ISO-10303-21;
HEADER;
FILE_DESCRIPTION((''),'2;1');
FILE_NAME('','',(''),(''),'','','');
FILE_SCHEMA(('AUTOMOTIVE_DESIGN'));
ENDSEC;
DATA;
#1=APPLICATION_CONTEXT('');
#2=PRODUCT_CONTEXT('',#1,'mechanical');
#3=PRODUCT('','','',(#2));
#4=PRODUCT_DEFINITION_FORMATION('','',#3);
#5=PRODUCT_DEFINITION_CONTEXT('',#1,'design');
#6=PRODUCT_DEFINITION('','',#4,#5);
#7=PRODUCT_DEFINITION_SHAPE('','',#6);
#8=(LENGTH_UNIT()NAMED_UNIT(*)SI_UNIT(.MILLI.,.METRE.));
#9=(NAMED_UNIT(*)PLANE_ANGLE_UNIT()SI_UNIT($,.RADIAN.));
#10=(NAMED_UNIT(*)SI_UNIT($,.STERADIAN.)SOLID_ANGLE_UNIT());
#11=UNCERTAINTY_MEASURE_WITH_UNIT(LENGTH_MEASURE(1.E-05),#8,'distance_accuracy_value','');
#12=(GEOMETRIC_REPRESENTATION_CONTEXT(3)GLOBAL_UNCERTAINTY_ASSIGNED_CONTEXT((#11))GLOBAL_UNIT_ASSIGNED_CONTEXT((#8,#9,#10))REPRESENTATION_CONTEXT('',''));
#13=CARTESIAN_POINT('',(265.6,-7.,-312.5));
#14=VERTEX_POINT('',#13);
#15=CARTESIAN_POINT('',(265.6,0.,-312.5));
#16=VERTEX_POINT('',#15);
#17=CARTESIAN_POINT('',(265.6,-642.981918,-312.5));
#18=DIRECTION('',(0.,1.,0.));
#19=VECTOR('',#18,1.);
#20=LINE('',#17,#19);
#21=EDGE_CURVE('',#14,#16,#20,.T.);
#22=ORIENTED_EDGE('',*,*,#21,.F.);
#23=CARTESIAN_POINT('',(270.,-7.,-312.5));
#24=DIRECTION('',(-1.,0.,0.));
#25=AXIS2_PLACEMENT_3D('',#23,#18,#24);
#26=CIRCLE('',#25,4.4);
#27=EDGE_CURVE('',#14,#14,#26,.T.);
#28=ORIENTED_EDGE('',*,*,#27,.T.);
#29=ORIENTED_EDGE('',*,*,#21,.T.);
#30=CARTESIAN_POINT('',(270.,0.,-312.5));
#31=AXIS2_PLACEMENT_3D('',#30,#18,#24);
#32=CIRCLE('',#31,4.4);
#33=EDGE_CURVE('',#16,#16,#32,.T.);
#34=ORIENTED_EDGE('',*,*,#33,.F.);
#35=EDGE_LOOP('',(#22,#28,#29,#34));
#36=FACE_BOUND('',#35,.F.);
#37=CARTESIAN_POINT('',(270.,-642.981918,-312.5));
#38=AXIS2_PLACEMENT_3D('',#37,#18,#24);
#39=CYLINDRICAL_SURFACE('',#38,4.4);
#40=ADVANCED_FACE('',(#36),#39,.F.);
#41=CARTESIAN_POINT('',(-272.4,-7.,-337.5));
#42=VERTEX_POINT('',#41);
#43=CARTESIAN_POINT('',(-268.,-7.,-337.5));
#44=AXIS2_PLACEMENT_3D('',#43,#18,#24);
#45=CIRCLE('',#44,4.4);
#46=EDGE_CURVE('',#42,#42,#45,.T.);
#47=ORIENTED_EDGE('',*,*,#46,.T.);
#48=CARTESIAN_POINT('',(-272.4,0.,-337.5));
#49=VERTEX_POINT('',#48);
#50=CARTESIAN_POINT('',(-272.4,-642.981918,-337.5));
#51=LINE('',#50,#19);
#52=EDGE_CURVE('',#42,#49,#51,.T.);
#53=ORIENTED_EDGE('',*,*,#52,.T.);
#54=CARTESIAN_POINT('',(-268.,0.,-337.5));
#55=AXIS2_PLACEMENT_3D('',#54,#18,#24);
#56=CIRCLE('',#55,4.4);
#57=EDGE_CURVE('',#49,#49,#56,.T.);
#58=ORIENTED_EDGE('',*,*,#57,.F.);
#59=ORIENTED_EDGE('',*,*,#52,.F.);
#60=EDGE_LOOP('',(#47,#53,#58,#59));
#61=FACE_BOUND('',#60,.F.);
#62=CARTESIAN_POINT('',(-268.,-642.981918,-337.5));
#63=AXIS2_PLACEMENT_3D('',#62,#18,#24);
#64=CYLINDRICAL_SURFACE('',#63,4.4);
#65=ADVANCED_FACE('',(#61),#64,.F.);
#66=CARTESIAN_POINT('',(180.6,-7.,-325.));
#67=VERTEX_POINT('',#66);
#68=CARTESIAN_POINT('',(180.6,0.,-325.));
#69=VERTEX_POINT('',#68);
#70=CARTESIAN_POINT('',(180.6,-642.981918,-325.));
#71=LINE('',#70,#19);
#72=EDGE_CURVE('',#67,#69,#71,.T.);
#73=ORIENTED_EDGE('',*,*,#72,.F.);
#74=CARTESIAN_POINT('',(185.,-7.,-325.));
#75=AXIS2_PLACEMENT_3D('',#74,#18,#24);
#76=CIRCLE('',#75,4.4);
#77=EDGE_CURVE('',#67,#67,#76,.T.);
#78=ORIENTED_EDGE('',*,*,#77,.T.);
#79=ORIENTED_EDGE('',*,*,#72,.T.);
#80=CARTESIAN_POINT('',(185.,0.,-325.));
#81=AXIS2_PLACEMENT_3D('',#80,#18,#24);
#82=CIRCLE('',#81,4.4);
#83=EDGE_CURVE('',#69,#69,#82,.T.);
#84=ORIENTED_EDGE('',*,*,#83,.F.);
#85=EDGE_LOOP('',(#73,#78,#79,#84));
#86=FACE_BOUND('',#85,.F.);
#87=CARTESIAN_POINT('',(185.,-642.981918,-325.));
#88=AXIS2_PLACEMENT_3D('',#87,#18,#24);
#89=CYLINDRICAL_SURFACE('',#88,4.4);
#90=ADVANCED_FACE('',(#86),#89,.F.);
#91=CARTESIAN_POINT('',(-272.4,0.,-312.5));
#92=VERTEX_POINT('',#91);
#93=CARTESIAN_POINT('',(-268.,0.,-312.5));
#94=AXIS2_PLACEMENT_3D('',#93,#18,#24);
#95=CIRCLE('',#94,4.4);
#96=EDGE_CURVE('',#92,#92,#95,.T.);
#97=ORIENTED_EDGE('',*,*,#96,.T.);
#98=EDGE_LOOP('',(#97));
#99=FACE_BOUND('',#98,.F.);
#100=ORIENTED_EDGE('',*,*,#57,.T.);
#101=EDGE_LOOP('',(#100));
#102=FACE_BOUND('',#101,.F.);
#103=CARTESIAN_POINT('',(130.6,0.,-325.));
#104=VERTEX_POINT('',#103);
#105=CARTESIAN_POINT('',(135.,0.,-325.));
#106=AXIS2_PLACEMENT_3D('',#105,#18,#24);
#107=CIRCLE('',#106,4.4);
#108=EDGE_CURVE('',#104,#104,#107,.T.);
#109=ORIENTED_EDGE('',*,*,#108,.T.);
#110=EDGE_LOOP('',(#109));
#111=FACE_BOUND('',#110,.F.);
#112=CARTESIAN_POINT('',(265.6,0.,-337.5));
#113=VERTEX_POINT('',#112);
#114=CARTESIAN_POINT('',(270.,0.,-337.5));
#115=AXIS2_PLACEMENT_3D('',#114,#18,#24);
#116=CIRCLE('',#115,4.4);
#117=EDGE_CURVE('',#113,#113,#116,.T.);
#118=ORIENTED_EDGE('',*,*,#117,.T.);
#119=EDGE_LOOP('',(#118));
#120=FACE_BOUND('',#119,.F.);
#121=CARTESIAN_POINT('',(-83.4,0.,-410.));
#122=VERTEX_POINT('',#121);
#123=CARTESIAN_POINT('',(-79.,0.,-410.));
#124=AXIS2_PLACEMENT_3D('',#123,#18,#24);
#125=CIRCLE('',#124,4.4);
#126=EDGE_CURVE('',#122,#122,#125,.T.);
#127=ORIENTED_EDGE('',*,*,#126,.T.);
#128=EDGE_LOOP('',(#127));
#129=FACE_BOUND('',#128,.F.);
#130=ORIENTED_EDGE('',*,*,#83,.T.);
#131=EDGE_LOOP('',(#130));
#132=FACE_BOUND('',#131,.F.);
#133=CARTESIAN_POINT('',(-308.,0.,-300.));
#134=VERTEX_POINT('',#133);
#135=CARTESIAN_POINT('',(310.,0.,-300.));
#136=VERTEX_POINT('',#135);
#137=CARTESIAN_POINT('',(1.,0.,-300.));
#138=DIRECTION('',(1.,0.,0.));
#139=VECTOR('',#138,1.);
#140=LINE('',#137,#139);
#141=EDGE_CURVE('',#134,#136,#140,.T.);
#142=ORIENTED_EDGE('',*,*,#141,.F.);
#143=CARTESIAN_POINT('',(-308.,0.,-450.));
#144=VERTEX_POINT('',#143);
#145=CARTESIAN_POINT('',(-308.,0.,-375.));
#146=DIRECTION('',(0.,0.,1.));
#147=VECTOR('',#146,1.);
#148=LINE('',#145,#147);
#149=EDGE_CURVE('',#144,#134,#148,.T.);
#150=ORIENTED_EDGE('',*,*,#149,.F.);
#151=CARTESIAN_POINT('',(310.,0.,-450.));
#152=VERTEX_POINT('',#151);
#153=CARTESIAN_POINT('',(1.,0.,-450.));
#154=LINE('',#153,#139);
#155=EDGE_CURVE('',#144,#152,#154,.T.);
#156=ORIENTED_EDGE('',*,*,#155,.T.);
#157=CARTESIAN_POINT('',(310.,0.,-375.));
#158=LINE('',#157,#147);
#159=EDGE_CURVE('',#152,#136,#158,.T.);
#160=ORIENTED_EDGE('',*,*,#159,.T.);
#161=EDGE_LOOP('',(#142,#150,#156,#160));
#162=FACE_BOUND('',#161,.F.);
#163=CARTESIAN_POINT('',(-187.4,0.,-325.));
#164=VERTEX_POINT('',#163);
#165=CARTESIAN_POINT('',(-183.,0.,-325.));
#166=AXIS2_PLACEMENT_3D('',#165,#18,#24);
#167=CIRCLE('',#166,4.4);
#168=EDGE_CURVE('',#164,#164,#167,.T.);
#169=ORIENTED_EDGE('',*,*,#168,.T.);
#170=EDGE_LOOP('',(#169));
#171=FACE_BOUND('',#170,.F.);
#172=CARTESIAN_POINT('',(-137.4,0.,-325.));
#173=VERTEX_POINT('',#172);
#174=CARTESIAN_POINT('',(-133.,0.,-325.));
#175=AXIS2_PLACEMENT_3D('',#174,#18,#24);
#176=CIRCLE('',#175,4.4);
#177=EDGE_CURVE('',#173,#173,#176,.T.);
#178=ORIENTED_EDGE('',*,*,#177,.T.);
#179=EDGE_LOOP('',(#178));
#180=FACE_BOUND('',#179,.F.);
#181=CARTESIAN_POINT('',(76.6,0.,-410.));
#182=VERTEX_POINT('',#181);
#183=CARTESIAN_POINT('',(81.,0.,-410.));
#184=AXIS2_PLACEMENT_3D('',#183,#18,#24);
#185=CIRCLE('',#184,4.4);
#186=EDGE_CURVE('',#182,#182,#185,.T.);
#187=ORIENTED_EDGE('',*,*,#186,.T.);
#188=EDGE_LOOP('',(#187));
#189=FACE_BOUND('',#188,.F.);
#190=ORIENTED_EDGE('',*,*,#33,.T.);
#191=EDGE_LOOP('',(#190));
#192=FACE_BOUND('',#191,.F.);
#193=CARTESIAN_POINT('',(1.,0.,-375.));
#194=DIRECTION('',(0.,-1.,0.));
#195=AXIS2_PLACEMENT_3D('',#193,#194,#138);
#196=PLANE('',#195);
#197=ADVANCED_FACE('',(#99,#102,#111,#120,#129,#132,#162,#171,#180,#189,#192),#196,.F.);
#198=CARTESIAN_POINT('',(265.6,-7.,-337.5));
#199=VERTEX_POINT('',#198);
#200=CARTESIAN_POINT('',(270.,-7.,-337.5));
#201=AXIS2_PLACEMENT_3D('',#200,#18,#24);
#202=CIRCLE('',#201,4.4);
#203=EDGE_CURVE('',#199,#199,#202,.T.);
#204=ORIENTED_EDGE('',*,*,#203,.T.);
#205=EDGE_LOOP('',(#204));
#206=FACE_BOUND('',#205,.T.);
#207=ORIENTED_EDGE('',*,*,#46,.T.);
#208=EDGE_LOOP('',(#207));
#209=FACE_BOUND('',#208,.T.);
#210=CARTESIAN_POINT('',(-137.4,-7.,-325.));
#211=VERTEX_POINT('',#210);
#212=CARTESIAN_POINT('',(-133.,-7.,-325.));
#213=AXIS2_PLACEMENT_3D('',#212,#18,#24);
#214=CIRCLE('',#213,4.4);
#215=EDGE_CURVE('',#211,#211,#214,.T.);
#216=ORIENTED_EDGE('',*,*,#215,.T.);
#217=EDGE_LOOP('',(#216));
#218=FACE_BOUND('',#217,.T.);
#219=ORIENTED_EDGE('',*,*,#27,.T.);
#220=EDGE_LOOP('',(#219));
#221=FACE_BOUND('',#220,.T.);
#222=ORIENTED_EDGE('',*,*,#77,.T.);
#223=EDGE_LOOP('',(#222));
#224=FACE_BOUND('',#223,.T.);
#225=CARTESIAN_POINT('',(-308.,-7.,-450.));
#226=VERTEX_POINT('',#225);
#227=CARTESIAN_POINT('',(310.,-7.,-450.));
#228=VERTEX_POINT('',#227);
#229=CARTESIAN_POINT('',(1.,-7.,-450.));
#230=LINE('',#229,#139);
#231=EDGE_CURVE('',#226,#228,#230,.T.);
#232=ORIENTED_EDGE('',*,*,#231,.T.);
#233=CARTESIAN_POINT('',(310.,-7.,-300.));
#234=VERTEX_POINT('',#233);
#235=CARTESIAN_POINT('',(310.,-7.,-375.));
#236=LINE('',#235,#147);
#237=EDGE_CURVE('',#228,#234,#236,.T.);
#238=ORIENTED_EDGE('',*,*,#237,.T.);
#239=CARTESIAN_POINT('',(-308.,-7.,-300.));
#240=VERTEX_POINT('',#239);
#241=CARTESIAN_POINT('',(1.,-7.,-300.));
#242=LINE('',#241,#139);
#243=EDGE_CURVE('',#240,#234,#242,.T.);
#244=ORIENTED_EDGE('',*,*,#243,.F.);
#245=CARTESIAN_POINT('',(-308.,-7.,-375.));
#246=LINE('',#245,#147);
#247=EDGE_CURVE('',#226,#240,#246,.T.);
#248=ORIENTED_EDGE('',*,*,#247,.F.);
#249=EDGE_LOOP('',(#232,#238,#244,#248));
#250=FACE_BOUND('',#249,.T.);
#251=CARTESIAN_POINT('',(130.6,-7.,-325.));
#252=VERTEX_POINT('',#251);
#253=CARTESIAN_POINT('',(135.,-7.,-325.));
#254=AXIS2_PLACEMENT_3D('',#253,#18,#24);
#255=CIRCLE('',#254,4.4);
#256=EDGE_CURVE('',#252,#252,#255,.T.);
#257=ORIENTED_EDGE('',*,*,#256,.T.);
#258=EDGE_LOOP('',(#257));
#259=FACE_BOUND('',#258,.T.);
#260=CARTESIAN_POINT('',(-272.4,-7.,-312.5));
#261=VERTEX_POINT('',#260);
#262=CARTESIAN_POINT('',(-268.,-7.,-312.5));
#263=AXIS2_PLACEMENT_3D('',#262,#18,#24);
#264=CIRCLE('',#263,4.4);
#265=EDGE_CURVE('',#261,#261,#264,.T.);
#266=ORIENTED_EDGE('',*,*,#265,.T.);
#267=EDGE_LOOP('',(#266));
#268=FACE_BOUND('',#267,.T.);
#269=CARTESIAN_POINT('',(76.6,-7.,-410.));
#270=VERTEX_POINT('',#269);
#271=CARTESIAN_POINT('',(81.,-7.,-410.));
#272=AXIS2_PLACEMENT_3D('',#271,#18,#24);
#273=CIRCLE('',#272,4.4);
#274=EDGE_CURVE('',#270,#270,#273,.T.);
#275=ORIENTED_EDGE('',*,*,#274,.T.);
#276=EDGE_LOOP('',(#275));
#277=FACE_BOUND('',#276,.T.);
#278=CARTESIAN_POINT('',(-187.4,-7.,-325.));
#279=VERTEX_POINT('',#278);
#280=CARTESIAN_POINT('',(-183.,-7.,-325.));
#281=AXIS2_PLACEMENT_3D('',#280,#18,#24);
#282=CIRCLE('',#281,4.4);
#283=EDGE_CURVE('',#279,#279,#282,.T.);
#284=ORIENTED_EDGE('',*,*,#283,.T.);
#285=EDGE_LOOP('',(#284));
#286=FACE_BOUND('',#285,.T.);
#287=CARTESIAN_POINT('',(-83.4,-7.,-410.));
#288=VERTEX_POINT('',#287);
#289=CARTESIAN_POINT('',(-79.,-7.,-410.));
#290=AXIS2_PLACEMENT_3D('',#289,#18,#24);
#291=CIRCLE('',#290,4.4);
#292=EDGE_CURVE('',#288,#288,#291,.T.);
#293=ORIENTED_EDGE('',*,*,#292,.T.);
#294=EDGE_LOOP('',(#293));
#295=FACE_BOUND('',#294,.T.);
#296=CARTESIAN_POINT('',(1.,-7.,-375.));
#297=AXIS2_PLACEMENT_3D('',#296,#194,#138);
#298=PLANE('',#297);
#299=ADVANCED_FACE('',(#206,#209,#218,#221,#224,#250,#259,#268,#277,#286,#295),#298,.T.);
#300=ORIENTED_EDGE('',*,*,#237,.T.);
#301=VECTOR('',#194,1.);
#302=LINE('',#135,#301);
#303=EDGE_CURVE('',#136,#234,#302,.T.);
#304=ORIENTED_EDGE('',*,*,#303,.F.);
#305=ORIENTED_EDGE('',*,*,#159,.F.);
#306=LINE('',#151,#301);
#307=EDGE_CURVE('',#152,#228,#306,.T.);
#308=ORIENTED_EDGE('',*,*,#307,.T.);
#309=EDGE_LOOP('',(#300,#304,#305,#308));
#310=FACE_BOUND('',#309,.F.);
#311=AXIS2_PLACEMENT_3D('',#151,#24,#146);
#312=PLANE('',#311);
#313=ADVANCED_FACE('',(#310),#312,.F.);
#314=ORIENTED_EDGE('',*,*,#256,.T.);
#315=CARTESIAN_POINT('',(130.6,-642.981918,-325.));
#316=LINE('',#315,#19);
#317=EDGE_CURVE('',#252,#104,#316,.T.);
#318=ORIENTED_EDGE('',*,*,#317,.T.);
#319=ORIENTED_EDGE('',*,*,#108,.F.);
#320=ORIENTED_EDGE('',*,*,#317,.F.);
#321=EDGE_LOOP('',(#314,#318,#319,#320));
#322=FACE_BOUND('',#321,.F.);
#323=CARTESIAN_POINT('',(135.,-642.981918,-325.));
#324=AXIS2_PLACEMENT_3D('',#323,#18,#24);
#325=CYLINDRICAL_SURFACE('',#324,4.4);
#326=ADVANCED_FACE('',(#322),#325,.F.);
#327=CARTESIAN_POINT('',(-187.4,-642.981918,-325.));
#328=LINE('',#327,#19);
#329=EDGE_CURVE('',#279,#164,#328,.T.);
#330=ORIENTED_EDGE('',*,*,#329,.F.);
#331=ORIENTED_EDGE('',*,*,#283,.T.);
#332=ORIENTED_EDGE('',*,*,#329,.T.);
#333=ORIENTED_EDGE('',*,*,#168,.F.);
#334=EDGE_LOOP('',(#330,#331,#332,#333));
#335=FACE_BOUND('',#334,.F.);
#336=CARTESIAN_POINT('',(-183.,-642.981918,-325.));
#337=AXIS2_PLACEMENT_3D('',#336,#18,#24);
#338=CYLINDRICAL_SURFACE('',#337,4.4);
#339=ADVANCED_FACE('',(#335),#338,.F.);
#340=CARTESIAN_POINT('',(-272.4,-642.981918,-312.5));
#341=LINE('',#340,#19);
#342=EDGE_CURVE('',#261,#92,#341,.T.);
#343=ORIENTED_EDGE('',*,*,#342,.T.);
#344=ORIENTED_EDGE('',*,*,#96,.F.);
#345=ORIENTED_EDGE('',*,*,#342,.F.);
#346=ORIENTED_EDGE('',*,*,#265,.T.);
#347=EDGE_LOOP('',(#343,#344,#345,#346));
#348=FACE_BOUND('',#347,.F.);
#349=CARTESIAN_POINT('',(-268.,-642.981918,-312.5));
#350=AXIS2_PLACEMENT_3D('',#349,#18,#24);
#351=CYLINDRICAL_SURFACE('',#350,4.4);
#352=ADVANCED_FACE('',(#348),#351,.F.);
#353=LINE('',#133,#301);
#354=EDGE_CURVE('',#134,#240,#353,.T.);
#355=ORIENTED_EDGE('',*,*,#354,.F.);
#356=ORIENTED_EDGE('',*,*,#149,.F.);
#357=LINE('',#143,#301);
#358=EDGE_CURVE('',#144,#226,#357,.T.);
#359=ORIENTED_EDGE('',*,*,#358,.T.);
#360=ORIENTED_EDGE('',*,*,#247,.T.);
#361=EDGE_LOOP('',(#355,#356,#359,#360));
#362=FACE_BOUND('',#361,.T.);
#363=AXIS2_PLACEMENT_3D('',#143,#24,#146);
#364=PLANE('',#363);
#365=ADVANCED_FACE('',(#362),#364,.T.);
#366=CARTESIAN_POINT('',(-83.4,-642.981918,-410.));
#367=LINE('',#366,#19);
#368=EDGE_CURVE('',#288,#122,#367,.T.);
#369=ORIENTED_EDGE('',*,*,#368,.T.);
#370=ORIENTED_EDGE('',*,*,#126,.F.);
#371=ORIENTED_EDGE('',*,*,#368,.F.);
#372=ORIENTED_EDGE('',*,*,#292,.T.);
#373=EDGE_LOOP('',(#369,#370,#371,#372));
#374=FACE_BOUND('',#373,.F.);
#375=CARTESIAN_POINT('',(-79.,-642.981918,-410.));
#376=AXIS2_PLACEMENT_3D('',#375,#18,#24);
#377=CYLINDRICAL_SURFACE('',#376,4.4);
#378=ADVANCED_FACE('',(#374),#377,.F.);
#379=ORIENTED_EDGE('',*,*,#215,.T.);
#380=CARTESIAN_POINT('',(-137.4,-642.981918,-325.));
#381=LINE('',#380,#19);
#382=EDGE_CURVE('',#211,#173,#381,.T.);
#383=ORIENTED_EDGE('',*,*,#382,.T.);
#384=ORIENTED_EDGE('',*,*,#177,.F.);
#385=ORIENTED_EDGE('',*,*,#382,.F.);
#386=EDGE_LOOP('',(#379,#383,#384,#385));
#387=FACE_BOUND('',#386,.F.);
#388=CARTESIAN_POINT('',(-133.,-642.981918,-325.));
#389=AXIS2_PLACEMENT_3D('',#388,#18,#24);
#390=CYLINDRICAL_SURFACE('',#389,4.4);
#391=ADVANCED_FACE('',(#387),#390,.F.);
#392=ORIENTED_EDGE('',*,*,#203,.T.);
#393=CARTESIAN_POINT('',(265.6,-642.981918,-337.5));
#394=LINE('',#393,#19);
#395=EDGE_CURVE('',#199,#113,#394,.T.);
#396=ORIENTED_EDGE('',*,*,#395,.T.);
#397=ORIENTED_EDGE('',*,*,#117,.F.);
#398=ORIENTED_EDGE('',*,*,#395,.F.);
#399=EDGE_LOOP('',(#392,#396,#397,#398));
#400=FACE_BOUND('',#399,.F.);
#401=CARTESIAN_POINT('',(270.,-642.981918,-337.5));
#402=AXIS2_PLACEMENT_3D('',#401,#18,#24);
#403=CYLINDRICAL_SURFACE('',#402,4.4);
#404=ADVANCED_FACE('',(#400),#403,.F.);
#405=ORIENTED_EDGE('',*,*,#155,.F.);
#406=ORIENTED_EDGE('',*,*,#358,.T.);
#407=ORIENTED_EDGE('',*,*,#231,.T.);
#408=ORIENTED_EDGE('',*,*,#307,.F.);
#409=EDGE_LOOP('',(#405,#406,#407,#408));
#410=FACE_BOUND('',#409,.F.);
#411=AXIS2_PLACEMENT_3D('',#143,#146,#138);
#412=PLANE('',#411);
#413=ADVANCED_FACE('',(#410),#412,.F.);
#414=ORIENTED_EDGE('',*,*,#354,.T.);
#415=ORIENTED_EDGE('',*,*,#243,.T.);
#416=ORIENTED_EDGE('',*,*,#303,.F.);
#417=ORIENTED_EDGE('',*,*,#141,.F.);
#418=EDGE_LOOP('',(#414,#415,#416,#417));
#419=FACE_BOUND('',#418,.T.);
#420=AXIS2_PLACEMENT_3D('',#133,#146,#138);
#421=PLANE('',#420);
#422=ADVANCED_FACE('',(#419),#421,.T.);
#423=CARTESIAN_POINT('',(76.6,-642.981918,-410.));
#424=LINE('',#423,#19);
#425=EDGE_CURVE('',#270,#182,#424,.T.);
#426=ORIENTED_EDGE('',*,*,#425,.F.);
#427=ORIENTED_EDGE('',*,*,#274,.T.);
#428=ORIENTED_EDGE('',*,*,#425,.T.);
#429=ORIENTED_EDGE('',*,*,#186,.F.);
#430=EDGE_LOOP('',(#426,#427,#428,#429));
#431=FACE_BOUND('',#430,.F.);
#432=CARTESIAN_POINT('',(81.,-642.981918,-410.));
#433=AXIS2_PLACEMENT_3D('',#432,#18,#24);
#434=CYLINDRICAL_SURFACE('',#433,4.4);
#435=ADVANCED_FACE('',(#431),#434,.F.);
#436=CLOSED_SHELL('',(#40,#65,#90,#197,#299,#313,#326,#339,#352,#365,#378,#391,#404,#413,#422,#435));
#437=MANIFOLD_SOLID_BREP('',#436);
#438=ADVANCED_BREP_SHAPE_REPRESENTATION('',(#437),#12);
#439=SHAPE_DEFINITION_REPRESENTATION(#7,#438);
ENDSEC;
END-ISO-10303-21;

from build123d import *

# Parameters (mm, degrees)
F0_W     = 618
F0_H     = 150
F1_DEPTH = 7
F3_D     = 8.8
F5_D     = 8.8


# Not quite as in the source:
# - a feature names something its author has since deleted; it is built from what else it names


with BuildPart() as f1:
    # F0 (on Front) → F1 (new body)
    with BuildSketch(Plane.XZ):
        with Locations((1, -375)):
            Rectangle(F0_W, F0_H)
    extrude(amount=F1_DEPTH)

    # F3 (through all)
    with Locations(Plane.XZ.offset(7)):
        with Locations((-183, -325), (-133, -325), (185, -325), (135, -325)):
            Hole(F3_D / 2)

    # F5 (through all)
    with Locations(Plane.XZ.offset(7)):
        with Locations((-268, -337.5), (-268, -312.5), (270, -337.5), (270, -312.5), (-79, -410), (81, -410)):
            Hole(F5_D / 2)


solid = f1.part
